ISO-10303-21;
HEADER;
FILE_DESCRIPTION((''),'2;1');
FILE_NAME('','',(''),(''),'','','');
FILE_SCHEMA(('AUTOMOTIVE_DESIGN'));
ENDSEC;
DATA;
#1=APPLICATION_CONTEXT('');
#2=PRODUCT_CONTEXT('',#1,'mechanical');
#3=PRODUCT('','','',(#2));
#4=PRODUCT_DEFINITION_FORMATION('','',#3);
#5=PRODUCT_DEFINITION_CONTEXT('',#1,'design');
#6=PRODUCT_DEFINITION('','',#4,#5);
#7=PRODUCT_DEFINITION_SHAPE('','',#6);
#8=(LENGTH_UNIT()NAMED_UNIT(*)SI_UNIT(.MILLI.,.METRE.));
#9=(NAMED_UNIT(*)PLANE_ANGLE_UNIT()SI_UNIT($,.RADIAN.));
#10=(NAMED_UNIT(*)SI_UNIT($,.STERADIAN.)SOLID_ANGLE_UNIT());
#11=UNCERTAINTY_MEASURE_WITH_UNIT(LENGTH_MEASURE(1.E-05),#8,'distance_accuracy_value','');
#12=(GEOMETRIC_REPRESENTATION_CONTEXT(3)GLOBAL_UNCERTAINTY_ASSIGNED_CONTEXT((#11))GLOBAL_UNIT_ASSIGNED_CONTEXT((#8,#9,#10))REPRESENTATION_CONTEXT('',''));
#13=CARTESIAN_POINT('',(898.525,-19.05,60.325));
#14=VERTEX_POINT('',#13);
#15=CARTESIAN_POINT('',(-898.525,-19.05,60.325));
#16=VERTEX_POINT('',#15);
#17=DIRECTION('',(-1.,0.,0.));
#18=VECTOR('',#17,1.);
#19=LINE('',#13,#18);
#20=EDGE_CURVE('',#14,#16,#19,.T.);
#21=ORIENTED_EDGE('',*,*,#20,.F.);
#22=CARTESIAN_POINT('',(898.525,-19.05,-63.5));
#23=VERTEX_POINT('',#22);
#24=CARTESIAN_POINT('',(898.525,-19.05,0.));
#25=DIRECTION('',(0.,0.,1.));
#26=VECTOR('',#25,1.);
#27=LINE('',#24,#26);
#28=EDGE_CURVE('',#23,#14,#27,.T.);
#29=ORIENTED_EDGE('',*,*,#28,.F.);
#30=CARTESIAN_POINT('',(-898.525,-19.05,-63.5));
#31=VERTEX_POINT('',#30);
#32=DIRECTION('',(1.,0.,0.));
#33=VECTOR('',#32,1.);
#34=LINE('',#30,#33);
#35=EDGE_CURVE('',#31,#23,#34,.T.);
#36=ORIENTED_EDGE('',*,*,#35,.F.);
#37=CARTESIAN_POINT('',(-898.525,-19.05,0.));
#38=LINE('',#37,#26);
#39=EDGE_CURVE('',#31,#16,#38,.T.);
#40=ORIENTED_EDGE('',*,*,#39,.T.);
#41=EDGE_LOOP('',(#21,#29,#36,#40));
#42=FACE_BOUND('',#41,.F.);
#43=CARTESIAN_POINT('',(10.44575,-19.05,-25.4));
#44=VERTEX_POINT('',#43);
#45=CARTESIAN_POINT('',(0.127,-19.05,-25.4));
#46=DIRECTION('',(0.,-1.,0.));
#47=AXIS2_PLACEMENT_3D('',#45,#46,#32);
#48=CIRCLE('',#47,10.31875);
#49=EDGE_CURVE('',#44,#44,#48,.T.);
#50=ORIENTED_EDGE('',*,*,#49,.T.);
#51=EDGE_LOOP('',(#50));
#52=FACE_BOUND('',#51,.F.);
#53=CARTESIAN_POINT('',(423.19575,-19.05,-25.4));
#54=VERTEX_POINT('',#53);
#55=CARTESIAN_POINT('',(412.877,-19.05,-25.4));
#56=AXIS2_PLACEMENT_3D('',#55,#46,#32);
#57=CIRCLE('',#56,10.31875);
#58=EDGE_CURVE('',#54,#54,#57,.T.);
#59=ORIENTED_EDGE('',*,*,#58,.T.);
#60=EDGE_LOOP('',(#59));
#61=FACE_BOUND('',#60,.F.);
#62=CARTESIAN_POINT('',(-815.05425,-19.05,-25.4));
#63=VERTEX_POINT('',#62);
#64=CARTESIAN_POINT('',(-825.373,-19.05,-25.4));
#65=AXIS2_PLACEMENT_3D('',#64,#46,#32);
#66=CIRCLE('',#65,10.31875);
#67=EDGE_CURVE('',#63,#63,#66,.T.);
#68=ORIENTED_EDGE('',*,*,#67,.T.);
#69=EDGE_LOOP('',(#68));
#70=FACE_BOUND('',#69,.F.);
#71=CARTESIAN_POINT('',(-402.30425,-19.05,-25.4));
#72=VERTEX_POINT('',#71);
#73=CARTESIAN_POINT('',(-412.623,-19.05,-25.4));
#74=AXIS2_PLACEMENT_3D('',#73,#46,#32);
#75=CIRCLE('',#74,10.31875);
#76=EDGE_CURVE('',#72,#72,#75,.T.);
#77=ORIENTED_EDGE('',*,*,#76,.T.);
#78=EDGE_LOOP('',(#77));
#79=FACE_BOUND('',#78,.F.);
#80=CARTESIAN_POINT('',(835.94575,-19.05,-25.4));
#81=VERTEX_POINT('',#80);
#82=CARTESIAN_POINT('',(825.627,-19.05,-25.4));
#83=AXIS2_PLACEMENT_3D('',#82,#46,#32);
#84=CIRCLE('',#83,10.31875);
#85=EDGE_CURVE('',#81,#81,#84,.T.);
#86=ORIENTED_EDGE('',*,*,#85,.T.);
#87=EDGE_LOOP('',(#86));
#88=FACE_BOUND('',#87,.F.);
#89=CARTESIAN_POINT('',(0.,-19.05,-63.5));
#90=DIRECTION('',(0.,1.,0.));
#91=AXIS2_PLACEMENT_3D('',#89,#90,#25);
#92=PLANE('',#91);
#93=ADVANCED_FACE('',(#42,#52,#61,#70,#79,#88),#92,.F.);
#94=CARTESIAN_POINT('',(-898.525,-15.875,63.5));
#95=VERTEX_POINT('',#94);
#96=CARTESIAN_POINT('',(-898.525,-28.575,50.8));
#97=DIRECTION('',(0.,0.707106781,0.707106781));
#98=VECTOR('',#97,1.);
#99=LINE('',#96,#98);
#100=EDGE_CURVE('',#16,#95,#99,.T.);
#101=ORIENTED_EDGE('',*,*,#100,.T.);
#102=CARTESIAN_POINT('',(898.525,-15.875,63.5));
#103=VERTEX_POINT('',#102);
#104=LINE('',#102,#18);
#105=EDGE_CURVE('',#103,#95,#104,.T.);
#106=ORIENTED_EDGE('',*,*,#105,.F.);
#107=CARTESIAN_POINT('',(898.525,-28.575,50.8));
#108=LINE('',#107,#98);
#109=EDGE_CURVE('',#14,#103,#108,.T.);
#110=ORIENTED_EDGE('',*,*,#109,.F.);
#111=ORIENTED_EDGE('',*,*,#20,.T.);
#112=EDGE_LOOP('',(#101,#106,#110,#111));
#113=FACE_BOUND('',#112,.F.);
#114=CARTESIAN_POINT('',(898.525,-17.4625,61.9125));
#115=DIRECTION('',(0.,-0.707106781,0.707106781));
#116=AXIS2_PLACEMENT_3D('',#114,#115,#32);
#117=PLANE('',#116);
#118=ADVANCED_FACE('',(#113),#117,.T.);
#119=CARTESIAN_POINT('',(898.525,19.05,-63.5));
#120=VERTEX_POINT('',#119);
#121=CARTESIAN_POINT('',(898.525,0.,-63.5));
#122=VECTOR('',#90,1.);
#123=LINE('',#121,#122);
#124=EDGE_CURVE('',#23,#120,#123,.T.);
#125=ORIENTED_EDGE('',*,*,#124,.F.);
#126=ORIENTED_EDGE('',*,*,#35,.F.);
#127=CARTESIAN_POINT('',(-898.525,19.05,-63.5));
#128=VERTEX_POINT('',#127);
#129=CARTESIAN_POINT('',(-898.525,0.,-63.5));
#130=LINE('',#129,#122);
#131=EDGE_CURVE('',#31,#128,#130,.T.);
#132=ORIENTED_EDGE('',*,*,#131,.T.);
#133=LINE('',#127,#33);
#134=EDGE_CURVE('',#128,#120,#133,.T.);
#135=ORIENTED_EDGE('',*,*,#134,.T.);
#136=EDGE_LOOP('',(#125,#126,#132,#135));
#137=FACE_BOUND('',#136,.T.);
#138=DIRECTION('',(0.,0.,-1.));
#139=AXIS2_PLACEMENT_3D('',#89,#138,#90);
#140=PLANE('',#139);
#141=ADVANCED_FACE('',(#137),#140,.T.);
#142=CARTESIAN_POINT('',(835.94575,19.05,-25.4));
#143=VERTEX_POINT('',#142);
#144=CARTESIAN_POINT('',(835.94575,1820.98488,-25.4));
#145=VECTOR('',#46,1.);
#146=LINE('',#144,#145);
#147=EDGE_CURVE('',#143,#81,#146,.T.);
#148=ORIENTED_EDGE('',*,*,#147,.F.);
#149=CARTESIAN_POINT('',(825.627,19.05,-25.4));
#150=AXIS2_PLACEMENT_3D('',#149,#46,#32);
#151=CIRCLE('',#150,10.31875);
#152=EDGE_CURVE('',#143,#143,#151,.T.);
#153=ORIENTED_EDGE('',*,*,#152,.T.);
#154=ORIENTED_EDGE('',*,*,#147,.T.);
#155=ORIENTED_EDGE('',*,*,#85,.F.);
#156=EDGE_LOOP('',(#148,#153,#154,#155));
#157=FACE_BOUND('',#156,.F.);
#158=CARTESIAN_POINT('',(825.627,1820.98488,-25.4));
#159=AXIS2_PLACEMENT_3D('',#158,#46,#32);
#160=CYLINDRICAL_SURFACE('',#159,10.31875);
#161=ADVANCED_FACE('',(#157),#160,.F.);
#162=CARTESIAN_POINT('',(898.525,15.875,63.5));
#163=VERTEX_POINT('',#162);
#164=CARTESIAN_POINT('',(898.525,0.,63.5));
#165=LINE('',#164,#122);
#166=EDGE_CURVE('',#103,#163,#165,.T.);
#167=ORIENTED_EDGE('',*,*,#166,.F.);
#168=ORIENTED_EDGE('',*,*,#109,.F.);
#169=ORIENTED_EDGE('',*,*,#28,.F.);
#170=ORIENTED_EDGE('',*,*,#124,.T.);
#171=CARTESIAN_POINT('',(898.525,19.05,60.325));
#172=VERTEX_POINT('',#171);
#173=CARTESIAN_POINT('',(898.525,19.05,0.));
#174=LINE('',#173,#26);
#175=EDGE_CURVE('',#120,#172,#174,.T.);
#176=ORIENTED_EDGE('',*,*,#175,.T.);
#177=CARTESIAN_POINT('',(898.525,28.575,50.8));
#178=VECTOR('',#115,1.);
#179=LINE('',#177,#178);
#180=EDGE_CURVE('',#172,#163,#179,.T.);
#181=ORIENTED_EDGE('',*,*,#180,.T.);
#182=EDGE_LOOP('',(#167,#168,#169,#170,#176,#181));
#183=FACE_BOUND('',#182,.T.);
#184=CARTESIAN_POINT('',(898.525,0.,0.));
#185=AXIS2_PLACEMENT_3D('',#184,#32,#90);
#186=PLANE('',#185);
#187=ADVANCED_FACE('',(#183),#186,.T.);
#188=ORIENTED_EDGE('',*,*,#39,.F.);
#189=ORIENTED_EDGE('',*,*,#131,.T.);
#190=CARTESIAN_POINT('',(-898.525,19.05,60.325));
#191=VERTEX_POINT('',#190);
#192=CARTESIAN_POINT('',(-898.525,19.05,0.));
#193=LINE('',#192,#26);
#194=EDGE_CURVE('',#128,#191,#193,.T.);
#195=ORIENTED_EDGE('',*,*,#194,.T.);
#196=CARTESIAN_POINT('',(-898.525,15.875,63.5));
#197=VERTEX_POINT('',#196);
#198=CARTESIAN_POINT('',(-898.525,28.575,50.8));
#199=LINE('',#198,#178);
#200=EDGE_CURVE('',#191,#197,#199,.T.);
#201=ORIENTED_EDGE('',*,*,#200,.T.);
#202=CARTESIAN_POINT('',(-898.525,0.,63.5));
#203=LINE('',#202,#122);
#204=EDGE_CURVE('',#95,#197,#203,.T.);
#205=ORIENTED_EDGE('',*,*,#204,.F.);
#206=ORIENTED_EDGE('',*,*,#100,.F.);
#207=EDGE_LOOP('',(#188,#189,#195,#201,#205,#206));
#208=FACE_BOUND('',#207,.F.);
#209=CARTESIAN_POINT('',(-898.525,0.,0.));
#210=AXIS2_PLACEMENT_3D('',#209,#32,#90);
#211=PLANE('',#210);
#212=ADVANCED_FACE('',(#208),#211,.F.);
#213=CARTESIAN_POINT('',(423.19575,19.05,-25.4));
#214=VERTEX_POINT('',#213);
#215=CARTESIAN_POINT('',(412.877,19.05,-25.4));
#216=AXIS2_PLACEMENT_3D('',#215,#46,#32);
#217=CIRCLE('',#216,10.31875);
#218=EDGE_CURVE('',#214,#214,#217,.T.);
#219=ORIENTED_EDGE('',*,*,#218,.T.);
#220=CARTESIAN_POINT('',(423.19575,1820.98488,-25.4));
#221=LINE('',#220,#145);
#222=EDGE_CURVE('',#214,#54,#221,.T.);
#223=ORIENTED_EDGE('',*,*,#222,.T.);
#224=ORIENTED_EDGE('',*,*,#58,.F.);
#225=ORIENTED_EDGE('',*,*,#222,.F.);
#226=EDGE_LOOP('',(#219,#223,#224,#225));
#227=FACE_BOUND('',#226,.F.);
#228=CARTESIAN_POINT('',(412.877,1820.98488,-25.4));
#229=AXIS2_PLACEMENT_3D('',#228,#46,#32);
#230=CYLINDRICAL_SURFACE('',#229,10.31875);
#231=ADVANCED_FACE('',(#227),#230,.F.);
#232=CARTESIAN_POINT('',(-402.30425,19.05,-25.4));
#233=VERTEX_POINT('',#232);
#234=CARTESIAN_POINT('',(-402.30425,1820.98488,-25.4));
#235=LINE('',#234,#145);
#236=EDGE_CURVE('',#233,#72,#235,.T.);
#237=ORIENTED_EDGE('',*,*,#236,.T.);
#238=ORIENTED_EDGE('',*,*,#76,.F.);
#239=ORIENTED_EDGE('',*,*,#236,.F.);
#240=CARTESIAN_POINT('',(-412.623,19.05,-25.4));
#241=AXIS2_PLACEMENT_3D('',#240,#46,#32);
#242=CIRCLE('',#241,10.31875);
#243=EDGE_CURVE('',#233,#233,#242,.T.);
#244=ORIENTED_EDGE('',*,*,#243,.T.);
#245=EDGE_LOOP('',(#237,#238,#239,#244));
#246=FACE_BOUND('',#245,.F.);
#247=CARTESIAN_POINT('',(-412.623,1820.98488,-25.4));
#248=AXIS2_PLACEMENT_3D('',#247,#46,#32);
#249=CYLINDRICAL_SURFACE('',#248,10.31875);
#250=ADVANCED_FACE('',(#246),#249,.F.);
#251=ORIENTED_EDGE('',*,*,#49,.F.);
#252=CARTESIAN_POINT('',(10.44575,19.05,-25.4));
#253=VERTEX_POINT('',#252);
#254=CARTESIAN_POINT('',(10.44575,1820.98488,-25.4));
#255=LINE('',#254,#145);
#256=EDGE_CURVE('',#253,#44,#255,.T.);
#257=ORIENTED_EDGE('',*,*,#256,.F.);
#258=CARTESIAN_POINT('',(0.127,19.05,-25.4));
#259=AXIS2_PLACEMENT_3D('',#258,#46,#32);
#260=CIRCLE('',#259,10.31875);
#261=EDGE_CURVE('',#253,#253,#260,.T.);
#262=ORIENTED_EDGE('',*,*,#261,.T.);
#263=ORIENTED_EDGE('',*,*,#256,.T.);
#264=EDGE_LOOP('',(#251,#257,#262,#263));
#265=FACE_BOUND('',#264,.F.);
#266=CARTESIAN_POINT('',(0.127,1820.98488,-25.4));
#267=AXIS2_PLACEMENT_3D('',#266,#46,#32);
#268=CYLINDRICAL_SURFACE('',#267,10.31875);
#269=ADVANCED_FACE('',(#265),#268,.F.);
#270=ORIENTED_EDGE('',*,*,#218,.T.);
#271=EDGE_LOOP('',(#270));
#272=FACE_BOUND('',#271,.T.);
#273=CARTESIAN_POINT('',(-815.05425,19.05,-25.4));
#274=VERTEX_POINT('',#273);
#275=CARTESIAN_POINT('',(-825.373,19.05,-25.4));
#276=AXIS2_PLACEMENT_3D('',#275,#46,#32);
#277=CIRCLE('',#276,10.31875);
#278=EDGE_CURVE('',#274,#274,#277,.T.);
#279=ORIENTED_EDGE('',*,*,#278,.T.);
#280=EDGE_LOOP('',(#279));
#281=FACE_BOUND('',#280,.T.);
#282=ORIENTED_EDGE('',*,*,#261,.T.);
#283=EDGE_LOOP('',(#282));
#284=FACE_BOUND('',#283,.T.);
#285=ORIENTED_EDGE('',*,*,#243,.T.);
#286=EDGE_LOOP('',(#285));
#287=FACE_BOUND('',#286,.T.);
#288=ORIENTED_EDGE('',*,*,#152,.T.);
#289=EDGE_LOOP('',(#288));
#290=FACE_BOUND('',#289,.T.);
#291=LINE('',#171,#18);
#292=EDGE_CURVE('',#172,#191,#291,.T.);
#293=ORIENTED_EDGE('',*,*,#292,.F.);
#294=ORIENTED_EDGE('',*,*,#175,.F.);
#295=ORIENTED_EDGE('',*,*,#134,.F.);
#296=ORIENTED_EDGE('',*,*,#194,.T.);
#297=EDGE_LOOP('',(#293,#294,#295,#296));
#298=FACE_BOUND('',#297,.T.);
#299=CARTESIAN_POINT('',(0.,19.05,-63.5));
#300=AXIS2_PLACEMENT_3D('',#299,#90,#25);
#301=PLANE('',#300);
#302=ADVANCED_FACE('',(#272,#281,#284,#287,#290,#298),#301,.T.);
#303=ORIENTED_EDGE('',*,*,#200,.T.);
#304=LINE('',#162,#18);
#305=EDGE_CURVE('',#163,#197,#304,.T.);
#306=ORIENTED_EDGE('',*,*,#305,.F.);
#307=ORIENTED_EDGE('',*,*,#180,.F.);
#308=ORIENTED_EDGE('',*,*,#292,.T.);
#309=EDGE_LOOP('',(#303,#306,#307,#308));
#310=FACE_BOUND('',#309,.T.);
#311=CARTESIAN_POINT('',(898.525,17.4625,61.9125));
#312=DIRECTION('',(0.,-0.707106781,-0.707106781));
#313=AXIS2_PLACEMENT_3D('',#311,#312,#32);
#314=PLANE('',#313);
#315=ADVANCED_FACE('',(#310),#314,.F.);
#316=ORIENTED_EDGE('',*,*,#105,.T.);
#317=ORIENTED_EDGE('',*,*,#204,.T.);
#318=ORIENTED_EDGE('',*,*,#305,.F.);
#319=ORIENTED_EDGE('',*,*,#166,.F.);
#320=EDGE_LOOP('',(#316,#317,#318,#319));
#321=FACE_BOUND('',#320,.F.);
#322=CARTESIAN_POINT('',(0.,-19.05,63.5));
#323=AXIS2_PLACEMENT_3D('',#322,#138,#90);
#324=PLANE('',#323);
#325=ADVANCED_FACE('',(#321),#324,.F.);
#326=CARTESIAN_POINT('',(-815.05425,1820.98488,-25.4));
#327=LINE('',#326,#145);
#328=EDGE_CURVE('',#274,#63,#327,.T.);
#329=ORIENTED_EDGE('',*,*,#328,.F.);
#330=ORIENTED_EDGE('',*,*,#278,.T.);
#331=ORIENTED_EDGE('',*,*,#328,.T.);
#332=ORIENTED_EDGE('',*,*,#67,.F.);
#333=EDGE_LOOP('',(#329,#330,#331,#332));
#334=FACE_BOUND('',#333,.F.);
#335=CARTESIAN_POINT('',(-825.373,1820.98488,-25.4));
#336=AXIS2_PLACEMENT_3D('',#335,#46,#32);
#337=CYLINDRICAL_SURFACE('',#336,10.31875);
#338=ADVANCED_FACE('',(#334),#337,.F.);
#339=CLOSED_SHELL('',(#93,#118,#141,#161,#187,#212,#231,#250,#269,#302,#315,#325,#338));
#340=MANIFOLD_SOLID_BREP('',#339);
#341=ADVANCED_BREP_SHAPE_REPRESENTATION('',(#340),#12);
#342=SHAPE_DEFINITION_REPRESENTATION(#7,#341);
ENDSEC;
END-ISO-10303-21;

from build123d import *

# Parameters (mm, degrees)
F0_W     = 38.1
F0_H     = 127
F1_DEPTH = 898.525
F2_SIZE  = 3.175
F4_D     = 20.6375


# Not quite as in the source:
# - a length typed as a fraction of an inch, garbled in the dataset ("3 / 203.2 mm" for 3/8 in), is restored


with BuildPart() as f1:
    # F0 (on Right) → F1 (new body, symmetric)
    with BuildSketch(Plane.YZ):
        Rectangle(F0_W, F0_H)
    extrude(amount=F1_DEPTH, both=True)

    # F2
    f2_edges = [f1.edges().sort_by_distance(p)[0] for p in [
        (0, 19.05, 63.5),
        (0, -19.05, 63.5),
    ]]
    chamfer(f2_edges, length=F2_SIZE)

    # F4 (through all)
    with Locations(Plane(origin=(0, 19.05, 0), x_dir=(-1, 0, 0), z_dir=(0, 1, 0))):
        with Locations((-825.627, -25.4), (-412.877, -25.4), (-0.127, -25.4), (412.623, -25.4), (825.373, -25.4)):
            Hole(F4_D / 2)


solid = f1.part
